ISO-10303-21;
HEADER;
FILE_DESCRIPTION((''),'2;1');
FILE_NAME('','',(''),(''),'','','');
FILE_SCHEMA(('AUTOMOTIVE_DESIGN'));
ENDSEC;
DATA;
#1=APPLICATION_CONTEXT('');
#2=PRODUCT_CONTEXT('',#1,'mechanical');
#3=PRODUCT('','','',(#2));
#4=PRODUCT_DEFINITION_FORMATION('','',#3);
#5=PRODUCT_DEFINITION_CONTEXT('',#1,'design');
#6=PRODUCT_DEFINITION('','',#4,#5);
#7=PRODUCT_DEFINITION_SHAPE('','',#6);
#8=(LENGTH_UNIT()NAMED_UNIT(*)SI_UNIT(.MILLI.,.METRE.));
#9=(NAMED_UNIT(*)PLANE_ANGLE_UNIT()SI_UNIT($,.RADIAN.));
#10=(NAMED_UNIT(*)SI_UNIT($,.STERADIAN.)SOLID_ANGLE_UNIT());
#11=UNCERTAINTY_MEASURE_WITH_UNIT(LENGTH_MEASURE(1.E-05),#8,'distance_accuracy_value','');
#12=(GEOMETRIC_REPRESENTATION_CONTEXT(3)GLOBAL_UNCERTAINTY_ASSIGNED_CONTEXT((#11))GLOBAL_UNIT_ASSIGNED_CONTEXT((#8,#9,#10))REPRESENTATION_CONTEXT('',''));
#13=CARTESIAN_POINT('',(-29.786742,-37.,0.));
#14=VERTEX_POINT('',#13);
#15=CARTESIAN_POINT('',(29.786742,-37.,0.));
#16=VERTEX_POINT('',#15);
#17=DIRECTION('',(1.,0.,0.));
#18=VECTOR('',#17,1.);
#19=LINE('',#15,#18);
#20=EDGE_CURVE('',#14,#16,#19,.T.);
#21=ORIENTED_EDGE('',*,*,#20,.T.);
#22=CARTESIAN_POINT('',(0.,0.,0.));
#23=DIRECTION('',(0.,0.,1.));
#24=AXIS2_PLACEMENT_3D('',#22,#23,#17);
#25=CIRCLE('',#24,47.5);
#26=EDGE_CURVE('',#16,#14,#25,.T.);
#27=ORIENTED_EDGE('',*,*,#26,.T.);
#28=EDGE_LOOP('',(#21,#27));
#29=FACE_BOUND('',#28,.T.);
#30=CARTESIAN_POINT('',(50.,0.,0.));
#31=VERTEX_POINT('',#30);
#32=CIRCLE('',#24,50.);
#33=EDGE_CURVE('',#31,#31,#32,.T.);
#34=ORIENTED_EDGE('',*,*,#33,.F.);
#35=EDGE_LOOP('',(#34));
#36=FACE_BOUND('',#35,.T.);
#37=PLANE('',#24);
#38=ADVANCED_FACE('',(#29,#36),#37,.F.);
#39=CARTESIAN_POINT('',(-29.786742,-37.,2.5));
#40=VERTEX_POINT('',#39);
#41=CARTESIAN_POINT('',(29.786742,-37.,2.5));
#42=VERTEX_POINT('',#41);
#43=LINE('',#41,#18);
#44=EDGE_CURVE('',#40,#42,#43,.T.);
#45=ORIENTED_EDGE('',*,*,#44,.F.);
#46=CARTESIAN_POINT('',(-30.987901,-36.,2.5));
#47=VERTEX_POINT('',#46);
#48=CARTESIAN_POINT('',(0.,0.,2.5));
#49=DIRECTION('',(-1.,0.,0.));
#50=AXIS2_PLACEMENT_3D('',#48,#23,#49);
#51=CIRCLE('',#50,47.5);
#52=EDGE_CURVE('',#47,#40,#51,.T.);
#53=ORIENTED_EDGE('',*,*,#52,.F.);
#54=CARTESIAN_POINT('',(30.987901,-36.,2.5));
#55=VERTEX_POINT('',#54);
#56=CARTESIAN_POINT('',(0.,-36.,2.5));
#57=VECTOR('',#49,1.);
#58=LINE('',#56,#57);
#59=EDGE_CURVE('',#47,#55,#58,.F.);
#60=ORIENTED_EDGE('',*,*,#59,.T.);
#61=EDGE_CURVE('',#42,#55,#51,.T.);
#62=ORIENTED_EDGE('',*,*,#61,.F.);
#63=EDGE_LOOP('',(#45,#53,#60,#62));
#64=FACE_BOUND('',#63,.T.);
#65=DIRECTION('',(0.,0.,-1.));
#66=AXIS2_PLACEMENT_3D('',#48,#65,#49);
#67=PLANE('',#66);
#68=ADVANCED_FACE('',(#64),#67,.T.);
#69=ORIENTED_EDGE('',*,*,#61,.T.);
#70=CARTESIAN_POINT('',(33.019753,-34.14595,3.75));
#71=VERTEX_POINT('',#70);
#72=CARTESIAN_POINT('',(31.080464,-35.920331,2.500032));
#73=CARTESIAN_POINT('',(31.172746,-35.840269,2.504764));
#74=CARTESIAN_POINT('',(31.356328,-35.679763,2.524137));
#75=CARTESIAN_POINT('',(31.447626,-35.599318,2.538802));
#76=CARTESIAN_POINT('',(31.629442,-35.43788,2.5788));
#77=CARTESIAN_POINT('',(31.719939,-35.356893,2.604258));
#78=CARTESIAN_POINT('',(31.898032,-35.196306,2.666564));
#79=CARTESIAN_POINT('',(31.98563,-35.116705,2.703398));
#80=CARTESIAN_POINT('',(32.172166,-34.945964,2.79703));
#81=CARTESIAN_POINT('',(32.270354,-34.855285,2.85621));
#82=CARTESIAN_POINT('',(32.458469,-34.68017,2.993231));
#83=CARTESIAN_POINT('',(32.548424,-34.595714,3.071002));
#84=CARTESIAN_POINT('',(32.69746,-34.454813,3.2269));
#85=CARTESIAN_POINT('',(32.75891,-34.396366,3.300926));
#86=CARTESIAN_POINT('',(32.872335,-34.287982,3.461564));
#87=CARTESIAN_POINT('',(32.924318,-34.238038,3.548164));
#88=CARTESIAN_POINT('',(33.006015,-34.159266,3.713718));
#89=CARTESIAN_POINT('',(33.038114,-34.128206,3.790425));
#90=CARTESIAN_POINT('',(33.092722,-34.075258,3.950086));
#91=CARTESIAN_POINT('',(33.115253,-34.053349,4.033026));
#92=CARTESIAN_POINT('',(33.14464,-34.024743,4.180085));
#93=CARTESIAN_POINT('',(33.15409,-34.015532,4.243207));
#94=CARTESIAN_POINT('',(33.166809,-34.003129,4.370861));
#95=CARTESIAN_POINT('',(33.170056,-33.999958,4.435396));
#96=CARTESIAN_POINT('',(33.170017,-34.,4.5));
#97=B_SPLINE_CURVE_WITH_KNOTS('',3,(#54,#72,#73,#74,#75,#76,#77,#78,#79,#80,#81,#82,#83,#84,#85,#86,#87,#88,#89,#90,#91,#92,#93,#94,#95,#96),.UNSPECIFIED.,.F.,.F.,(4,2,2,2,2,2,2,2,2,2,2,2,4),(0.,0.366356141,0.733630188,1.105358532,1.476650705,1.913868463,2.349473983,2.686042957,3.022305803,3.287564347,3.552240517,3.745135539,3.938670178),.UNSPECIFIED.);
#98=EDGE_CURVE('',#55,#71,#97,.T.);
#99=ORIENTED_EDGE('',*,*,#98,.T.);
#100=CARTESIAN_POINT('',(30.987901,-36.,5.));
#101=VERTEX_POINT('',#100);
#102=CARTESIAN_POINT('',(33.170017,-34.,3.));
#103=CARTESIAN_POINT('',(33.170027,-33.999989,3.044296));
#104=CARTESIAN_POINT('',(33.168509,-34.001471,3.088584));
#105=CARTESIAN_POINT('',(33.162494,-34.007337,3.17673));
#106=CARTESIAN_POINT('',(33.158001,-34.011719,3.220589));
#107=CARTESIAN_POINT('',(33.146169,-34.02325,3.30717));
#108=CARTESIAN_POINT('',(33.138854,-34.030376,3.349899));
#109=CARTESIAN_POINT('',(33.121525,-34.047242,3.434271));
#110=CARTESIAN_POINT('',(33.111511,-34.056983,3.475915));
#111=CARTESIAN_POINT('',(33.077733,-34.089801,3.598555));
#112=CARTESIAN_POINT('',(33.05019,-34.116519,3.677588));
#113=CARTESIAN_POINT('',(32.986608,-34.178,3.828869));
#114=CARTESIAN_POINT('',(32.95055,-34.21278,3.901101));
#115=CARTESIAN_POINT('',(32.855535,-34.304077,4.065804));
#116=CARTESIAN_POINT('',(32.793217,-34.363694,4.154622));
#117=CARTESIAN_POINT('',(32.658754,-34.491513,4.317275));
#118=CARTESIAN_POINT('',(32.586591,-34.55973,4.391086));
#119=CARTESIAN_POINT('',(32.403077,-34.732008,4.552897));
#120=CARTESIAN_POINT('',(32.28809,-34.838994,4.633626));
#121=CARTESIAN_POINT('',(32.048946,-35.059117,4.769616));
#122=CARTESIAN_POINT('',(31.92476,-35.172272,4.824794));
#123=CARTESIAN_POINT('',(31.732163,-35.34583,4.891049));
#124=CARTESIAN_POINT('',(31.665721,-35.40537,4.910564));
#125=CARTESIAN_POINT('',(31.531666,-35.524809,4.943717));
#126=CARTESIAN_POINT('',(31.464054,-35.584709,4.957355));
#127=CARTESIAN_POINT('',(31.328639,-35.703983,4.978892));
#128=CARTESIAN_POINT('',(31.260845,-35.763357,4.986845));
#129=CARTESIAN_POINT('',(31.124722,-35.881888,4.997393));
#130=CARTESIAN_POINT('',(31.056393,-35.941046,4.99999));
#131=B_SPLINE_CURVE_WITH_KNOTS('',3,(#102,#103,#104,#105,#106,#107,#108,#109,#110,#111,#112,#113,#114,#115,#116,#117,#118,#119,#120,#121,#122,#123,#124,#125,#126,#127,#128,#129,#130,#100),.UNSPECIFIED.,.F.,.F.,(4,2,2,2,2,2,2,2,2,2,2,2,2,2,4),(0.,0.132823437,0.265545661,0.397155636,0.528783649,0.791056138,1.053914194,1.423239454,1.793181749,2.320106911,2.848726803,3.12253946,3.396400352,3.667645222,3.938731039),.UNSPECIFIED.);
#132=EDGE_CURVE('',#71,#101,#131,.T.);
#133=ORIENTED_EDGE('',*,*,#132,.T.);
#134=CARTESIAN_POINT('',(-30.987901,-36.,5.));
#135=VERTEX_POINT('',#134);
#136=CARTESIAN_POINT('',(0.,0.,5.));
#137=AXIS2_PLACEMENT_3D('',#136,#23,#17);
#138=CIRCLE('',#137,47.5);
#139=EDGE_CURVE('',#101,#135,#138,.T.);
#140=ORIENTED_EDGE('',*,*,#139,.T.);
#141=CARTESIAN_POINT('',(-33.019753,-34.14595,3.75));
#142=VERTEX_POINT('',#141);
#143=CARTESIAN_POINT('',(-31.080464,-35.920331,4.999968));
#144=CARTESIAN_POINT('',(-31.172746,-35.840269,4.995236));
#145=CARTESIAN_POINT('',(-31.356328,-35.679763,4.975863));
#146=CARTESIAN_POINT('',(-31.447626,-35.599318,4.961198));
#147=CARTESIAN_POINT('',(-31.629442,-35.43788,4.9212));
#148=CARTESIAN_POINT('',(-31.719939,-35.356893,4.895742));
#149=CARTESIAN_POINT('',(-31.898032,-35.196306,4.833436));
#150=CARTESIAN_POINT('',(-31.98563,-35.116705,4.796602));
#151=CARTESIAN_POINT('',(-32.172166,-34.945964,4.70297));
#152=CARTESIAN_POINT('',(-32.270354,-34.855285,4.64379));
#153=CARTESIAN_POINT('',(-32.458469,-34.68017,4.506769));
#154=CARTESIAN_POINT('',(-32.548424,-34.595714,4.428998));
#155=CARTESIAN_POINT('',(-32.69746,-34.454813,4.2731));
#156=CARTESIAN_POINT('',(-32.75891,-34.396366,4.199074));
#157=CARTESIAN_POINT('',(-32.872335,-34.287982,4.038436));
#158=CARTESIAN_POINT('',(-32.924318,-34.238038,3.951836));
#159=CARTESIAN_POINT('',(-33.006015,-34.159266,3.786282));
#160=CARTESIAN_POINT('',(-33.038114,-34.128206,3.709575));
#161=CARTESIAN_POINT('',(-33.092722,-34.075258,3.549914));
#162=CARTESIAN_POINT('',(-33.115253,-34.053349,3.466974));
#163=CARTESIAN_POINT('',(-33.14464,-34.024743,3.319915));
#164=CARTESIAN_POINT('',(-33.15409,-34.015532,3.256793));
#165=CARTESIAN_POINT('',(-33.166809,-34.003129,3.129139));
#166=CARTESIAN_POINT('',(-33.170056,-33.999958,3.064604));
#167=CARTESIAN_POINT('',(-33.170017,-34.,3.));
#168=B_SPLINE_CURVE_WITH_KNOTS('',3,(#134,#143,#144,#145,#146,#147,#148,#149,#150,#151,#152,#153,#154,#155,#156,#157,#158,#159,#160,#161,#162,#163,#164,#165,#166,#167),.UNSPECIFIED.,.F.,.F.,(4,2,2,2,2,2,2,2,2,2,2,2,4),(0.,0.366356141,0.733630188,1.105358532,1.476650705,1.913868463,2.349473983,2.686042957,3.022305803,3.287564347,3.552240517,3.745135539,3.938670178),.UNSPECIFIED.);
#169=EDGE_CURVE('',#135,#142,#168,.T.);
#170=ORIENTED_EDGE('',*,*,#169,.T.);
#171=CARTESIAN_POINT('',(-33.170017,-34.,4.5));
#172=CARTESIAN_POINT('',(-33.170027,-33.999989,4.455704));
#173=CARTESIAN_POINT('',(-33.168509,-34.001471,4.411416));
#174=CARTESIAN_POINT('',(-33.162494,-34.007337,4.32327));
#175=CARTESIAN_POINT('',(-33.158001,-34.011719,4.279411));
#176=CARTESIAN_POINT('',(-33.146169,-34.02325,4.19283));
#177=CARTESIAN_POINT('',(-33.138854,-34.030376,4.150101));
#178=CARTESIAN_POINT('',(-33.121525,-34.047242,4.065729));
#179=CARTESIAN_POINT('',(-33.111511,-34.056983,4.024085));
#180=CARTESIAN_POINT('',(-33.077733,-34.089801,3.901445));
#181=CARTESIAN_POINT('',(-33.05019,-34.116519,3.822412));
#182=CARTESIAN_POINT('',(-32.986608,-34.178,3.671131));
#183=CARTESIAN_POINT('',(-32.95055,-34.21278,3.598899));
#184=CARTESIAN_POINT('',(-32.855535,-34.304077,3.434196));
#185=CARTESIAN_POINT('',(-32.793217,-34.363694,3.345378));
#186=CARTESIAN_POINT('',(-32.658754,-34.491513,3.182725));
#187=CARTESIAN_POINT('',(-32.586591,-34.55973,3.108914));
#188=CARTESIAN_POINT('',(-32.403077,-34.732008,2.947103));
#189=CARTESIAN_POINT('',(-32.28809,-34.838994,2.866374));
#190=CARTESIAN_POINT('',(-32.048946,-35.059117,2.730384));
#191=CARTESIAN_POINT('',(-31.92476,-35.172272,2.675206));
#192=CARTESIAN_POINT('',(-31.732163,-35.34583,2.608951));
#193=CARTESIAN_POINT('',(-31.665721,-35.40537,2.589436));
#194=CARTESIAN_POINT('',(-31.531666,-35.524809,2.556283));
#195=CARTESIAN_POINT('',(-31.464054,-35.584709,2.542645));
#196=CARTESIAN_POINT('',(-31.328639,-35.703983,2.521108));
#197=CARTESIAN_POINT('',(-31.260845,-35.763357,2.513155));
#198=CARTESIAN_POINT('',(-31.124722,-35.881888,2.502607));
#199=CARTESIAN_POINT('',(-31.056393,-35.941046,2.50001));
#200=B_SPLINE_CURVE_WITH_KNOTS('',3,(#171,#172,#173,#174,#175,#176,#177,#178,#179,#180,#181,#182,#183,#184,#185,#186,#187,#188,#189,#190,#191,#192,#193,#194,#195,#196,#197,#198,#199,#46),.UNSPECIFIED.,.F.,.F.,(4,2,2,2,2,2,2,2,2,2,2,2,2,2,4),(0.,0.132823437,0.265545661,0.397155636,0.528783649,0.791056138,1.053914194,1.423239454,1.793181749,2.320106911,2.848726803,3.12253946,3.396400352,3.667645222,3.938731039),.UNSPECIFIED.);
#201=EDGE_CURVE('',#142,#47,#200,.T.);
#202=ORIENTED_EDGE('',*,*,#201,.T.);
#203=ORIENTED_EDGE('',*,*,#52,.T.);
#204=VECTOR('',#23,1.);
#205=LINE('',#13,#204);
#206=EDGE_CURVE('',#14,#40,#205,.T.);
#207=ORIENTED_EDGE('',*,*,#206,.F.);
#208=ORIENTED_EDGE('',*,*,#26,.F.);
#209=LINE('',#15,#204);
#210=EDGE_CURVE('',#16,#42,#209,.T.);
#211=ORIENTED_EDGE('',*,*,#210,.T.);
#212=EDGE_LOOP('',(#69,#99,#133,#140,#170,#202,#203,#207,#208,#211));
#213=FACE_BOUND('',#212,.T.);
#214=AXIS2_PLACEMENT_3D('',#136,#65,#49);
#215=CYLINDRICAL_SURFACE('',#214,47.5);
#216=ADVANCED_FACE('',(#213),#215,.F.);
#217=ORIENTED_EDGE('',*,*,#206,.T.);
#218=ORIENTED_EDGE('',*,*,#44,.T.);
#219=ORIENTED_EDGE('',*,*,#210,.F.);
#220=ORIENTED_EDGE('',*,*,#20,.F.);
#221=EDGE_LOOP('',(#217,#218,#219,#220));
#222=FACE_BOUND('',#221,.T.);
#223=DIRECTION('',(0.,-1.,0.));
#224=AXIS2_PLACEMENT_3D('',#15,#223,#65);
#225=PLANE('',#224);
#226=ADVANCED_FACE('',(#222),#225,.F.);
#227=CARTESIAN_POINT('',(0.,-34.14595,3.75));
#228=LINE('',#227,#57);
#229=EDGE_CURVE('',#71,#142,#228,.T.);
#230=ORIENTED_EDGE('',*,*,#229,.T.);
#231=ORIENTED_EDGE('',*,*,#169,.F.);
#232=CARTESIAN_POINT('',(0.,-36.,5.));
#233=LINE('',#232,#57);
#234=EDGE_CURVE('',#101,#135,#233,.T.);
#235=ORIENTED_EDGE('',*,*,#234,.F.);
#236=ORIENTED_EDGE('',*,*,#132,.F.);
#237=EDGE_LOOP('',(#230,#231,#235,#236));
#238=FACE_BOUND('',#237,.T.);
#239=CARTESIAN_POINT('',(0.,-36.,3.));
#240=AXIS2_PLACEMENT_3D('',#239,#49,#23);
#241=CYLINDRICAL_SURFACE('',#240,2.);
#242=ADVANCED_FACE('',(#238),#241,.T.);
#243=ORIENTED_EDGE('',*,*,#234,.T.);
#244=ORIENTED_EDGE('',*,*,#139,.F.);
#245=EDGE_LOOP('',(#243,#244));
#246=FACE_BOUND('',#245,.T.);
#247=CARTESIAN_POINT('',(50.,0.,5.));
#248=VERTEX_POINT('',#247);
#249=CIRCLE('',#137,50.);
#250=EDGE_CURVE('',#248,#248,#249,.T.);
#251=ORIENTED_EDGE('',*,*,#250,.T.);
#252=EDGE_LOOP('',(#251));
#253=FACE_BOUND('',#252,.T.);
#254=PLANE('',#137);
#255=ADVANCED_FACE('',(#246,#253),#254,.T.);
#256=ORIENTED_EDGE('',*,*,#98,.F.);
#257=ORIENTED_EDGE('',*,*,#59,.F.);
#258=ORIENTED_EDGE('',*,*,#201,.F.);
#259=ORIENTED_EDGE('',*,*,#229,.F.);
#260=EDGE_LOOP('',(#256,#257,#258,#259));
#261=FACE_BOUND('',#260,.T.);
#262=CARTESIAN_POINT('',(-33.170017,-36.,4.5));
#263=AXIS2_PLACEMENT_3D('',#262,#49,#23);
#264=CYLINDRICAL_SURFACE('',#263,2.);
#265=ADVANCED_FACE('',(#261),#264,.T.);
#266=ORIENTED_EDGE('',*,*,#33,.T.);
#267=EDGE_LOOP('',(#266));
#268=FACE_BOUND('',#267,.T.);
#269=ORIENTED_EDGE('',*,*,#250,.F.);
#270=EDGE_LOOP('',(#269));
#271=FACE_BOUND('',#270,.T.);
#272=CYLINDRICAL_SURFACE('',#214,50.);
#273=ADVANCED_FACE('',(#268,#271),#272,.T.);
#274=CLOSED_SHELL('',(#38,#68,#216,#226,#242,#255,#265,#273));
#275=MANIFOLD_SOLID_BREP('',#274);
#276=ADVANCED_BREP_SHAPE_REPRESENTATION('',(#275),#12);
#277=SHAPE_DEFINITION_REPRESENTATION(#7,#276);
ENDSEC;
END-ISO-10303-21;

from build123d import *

# Parameters (mm, degrees)
ESQUISSE1_R        = 50
ESQUISSE1_R_2      = 47.5
BOSS_EXTRU_1_DEPTH = 5
BOSS_EXTRU_2_START = -2.5
BOSS_EXTRU_2_DEPTH = 2.5
CONG_2_R           = 2
BOSS_EXTRU_3_START = 2.5
BOSS_EXTRU_3_DEPTH = 2.5


with BuildPart() as part:
    # Esquisse1 → Boss.-Extru.1 (new body)
    with BuildSketch(Plane.XY):
        Circle(ESQUISSE1_R)
        Circle(ESQUISSE1_R_2, mode=Mode.SUBTRACT)
    extrude(amount=BOSS_EXTRU_1_DEPTH)

    # Esquisse2 → Boss.-Extru.2 (add)
    with BuildSketch(Plane.XY.offset(5).offset(BOSS_EXTRU_2_START)):
        with BuildLine():
            Line((-33.170016581, -34), (33.170016581, -34))
            ThreePointArc((33.170016581, -34), (0, -47.5), (-33.170016581, -34))
        make_face()
    extrude(amount=BOSS_EXTRU_2_DEPTH)

    # Congé2
    # the kernel refuses this fillet: 2 mm, written as the material it takes off along each edge
    with BuildSketch(Plane(origin=(-38.170016581, -34, 5), x_dir=(0, -1, 0), z_dir=(1, 0, 0))) as cong_2_piece_1_section:
        with BuildLine():
            CenterArc((CONG_2_R, CONG_2_R), CONG_2_R, 180, 90)
            Line((0, CONG_2_R), (0, 0))
            Line((0, 0), (CONG_2_R, 0))
        make_face()
    cong_2_piece_1 = extrude(amount=76.340033162, mode=Mode.PRIVATE)
    cong_2_piece_1 = cong_2_piece_1 & Plane(origin=(0, 0, 4.543639328), x_dir=(1, 0, 0), z_dir=(0, 0, -1)) * Cylinder(47.5, 161, mode=Mode.PRIVATE)
    add(cong_2_piece_1, mode=Mode.SUBTRACT)
    with BuildSketch(Plane(origin=(-38.170016581, -34, 2.5), x_dir=(0, 0, 1), z_dir=(1, 0, 0))) as cong_2_piece_2_section:
        with BuildLine():
            CenterArc((CONG_2_R, CONG_2_R), CONG_2_R, 180, 90)
            Line((0, CONG_2_R), (0, 0))
            Line((0, 0), (CONG_2_R, 0))
        make_face()
    cong_2_piece_2 = extrude(amount=76.340033162, mode=Mode.PRIVATE)
    cong_2_piece_2 = cong_2_piece_2 & Plane(origin=(0, 0, 2.956360666), x_dir=(1, 0, 0), z_dir=(0, 0, -1)) * Cylinder(47.5, 161, mode=Mode.PRIVATE)
    add(cong_2_piece_2, mode=Mode.SUBTRACT)

    # Esquisse3 → Boss.-Extru.3 (add)
    with BuildSketch(Plane(origin=(0, 0, 2.5), x_dir=(-1, 0, 0), z_dir=(0, 0, -1)).offset(BOSS_EXTRU_3_START)):
        with BuildLine():
            Line((-29.786742017, -37), (29.786742017, -37))
            ThreePointArc((29.786742017, -37), (0, -47.5), (-29.786742017, -37))
        make_face()
    extrude(amount=-BOSS_EXTRU_3_DEPTH)


solid = part.part
